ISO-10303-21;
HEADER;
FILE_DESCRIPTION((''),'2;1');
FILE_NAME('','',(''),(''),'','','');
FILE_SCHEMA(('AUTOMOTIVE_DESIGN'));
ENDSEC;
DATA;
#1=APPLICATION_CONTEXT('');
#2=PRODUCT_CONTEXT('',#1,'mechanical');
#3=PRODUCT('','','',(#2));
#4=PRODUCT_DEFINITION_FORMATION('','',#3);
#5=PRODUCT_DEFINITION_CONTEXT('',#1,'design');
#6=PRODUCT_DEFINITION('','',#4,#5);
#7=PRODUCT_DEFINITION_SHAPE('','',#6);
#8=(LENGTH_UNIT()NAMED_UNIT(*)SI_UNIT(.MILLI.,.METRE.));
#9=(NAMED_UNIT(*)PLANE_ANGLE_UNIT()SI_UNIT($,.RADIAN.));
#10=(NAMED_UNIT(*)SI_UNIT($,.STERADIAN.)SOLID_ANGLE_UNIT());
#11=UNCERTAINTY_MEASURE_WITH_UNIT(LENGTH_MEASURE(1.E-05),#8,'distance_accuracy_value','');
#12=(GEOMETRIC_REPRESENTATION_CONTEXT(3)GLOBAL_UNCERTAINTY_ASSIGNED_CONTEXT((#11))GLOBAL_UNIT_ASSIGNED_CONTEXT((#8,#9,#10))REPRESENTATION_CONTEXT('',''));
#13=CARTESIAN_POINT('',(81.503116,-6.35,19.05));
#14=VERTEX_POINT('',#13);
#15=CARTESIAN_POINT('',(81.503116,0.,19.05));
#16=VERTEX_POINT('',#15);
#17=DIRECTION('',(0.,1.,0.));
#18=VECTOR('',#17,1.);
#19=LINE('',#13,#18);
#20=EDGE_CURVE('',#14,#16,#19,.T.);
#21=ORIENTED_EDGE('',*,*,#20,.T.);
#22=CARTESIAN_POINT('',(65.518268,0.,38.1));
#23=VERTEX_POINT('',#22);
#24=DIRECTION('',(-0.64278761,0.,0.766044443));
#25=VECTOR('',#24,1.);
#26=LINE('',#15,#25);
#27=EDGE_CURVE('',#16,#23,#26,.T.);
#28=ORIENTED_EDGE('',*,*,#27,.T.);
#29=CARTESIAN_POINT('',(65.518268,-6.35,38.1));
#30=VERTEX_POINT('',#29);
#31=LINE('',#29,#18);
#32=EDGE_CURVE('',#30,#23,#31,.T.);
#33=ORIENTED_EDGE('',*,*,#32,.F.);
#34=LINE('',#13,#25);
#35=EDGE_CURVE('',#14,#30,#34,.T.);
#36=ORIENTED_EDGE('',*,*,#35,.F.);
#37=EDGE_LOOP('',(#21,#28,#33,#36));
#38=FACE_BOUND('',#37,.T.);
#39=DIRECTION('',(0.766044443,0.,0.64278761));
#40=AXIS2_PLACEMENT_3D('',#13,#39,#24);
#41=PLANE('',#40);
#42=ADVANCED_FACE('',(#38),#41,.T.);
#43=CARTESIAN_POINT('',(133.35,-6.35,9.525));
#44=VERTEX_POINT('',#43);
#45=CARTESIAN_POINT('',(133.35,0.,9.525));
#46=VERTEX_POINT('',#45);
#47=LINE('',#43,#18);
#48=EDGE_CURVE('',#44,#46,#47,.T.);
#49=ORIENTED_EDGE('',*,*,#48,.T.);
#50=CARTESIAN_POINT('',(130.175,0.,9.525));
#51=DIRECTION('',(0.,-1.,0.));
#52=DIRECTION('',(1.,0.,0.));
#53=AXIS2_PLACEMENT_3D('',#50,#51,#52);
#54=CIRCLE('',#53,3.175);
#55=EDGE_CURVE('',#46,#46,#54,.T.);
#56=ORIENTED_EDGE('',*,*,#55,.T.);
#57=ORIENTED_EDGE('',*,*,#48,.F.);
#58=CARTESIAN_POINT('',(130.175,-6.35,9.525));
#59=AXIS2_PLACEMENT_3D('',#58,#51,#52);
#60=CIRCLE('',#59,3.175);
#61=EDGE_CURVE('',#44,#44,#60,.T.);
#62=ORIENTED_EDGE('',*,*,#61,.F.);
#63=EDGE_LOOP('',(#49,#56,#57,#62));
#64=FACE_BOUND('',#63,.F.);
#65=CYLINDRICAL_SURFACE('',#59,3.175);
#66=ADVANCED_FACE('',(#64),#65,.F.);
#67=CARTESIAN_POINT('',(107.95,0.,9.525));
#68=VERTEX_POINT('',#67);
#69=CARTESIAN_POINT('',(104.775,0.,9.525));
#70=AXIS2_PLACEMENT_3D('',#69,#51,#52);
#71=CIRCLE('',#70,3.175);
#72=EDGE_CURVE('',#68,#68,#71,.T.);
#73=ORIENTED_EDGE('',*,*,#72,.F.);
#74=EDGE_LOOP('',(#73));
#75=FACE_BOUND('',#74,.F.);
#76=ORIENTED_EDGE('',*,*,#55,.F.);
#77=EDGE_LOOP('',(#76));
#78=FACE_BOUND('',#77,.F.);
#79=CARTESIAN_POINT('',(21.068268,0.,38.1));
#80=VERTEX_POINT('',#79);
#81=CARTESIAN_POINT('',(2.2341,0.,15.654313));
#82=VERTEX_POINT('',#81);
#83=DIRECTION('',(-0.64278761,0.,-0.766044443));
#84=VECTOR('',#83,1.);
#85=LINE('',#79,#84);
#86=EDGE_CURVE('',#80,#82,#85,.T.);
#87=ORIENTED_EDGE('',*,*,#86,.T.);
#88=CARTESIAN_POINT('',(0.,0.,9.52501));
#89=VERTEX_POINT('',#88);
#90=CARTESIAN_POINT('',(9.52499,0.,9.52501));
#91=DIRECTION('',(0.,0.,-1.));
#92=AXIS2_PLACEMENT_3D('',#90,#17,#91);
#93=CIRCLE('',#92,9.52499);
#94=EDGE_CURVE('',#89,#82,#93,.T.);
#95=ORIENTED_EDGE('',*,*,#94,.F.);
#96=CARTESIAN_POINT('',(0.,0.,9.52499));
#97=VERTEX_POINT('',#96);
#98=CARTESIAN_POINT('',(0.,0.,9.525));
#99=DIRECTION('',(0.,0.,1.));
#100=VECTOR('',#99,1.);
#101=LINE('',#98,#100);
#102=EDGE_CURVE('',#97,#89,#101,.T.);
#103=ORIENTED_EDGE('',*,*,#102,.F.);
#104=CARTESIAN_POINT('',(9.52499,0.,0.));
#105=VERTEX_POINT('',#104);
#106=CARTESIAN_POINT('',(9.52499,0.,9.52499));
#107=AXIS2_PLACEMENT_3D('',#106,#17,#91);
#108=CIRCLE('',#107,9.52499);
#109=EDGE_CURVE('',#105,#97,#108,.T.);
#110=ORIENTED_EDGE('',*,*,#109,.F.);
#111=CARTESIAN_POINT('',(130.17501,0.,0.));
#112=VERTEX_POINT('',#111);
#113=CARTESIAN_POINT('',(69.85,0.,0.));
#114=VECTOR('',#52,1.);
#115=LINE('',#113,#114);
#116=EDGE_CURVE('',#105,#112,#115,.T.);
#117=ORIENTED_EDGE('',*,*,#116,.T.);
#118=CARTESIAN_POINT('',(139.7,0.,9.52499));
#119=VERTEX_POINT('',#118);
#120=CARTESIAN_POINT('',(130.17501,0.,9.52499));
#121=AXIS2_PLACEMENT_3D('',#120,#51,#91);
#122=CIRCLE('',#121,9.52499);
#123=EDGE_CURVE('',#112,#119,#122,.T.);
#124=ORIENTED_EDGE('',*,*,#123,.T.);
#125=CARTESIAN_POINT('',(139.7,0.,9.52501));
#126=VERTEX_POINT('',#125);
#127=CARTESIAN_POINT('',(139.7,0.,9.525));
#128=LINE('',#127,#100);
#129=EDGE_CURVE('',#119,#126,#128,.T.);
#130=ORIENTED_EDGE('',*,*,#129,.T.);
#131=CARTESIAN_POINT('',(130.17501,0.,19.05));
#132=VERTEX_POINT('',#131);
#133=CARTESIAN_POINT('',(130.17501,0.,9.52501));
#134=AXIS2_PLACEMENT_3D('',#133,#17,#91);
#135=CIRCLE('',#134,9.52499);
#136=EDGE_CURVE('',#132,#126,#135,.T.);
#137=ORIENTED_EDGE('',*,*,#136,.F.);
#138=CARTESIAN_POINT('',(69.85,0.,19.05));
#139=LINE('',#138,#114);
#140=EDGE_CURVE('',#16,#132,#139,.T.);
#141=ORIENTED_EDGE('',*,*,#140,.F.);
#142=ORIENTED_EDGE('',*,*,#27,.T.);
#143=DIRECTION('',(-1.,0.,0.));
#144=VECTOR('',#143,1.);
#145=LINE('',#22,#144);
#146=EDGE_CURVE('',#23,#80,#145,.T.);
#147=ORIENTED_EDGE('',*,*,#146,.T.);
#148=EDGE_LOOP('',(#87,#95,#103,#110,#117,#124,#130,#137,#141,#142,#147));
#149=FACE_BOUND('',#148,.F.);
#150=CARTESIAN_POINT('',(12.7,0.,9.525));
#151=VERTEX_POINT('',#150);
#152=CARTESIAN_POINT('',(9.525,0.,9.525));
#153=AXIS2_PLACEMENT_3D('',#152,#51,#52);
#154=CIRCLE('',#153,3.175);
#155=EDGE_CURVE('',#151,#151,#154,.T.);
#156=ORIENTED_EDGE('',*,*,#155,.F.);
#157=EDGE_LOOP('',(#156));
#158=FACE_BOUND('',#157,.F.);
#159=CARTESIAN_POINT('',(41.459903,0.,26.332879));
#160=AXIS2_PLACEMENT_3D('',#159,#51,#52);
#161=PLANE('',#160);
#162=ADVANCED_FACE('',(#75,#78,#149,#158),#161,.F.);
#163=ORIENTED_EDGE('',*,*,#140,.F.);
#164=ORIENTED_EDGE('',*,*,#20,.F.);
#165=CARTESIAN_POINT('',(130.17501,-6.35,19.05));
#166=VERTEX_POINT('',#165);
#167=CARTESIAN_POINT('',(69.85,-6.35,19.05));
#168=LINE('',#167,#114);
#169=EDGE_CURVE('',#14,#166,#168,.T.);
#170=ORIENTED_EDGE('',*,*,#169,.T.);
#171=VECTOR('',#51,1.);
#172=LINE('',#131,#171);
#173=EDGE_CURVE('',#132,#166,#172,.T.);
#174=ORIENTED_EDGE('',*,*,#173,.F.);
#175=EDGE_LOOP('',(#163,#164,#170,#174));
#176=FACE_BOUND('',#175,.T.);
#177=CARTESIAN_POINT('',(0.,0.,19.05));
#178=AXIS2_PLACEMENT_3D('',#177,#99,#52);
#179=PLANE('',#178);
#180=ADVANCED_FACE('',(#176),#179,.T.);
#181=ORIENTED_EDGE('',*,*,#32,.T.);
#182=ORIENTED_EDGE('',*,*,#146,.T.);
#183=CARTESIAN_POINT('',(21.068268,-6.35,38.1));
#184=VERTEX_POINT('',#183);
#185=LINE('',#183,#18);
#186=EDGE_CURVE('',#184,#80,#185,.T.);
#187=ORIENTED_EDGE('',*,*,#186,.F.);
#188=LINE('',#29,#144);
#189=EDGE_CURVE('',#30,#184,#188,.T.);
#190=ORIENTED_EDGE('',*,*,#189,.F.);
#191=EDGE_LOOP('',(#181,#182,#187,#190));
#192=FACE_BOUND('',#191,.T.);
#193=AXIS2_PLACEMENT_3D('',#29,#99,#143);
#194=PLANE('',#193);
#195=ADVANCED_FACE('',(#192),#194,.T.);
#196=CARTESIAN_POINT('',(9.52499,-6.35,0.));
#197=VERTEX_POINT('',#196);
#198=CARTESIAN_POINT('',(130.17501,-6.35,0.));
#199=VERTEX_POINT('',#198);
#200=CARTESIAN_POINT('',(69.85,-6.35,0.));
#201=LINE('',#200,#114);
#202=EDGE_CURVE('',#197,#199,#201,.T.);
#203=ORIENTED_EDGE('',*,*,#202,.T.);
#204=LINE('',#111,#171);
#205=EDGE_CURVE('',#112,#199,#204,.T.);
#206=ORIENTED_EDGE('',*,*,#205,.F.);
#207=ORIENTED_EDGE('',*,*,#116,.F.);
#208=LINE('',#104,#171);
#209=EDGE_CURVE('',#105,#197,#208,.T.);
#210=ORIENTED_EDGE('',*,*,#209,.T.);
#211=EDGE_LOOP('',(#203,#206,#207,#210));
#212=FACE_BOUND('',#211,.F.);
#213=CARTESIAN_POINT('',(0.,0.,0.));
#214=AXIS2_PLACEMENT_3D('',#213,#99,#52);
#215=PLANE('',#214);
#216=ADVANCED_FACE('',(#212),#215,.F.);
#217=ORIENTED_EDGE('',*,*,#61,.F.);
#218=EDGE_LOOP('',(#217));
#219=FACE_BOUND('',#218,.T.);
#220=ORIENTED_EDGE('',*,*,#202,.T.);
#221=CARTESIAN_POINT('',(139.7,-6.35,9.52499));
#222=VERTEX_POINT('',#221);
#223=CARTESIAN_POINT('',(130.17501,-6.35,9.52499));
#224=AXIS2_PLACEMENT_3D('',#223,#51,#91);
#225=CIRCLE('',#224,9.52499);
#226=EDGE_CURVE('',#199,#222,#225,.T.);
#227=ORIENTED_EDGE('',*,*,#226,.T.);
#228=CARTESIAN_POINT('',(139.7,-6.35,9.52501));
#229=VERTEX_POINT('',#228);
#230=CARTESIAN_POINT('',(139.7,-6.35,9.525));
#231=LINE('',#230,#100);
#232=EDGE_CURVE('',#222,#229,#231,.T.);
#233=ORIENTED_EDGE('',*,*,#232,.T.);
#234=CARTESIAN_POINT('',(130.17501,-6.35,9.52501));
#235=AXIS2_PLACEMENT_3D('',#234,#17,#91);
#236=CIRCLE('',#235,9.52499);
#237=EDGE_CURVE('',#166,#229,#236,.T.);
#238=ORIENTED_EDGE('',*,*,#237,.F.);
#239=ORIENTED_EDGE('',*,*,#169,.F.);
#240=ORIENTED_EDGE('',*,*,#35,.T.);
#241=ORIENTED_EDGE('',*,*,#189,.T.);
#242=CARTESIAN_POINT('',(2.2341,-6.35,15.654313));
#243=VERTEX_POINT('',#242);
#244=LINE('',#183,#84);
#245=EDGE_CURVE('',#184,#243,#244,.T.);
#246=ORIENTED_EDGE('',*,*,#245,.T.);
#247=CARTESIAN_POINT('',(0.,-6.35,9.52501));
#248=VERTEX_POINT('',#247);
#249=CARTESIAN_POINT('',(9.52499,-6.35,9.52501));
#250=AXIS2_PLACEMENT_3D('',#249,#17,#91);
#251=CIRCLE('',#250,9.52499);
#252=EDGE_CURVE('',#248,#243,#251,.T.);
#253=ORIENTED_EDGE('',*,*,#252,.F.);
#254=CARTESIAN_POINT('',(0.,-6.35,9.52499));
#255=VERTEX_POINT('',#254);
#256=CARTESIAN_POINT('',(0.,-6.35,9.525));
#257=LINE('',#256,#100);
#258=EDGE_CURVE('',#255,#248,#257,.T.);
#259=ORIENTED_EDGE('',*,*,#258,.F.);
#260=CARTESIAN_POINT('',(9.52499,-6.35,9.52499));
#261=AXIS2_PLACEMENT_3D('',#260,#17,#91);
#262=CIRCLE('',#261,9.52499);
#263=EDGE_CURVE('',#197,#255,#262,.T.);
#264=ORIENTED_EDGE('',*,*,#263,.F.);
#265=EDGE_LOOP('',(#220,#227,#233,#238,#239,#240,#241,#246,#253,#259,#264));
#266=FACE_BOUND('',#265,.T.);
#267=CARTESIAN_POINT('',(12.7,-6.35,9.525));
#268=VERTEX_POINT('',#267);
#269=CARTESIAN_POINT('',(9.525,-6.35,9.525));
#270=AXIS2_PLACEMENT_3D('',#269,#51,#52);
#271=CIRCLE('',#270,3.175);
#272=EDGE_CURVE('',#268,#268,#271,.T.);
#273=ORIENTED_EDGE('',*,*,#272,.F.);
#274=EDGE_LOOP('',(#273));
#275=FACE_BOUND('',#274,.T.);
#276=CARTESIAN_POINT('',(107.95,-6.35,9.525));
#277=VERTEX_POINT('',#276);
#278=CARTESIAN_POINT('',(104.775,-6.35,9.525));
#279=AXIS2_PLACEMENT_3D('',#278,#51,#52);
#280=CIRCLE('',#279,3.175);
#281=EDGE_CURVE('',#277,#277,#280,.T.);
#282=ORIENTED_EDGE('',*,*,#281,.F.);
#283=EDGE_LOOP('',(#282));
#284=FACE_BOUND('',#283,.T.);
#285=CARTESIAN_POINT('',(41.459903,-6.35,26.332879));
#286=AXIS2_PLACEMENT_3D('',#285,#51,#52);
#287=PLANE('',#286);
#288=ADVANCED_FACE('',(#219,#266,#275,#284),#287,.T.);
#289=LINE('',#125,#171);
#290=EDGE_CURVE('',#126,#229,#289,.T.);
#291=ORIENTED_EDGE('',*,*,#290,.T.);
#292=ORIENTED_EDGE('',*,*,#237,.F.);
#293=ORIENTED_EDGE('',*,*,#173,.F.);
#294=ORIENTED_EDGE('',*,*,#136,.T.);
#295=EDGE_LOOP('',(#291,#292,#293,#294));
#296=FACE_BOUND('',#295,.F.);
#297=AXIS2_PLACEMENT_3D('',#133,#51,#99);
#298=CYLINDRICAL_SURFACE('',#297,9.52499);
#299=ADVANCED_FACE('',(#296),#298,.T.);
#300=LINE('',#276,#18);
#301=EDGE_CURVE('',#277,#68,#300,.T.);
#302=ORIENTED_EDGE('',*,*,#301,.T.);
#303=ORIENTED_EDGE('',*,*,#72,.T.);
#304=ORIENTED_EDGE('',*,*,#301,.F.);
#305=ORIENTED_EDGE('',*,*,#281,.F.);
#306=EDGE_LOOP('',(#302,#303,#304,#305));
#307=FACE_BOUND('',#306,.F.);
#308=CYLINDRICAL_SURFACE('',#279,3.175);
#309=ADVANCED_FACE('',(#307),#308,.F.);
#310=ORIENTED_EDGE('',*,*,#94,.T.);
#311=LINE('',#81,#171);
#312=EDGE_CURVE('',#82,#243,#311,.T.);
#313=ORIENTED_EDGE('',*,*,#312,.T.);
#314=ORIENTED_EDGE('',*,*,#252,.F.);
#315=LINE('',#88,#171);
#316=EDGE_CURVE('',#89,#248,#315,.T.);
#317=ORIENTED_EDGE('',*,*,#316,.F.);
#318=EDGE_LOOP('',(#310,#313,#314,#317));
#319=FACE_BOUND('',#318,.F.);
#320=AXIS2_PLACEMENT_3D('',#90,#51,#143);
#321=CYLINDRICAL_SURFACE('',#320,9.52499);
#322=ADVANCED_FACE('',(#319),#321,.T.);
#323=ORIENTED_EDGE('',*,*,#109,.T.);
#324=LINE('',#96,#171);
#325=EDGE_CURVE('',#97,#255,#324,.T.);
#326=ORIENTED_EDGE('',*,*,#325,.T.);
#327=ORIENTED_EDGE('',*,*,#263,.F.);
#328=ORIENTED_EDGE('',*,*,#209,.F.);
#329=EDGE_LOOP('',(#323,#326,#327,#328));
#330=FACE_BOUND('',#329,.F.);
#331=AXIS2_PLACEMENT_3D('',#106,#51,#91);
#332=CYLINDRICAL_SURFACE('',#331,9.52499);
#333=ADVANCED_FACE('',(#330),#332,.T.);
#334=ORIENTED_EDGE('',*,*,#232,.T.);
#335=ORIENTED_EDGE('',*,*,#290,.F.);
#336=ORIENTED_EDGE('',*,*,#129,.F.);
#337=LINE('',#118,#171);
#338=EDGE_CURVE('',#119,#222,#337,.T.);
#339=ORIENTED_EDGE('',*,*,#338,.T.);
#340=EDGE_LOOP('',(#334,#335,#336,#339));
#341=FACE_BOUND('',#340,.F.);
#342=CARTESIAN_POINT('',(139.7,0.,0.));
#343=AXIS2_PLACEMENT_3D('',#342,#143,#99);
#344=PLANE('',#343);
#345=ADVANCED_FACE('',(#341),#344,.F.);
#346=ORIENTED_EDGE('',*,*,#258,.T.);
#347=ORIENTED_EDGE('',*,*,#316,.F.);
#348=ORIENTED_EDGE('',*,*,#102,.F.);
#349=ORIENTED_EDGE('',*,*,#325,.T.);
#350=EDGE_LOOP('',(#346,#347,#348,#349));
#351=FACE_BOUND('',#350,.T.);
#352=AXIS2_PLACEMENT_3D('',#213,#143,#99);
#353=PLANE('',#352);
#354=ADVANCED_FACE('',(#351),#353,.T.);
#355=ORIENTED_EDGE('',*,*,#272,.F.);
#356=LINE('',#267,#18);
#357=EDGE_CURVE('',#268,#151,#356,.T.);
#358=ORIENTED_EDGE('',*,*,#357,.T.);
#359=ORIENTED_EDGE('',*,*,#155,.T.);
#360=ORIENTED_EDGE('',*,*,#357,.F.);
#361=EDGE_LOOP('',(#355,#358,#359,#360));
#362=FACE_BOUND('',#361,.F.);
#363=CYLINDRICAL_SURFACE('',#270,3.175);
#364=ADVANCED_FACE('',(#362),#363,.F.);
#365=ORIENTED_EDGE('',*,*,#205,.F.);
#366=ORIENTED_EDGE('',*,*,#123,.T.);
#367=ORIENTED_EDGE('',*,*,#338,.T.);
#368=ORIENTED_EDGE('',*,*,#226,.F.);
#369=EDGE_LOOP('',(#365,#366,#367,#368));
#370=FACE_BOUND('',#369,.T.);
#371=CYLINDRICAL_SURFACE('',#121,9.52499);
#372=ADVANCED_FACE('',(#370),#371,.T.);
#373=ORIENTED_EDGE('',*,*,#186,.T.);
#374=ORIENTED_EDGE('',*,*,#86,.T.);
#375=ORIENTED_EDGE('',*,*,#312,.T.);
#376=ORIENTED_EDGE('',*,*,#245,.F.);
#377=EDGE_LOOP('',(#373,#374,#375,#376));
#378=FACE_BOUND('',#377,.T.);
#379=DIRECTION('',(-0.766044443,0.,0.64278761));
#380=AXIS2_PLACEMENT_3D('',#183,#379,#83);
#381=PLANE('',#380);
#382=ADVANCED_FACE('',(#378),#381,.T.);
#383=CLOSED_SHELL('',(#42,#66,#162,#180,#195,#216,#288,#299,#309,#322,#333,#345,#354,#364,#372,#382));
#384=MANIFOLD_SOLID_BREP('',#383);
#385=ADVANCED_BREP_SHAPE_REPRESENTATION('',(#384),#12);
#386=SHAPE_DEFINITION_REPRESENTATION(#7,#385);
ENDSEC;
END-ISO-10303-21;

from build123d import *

# Parameters (mm, degrees)
F0_W      = 139.7
F0_H      = 19.05
F1_DEPTH  = 6.35
F2_R      = 3.175
F3_DEPTH  = 6.351
F4_R      = 3.175
F5_DEPTH  = 25.4
F6_R      = 9.52499
F7_R      = 9.52499
F8_R      = 3.175
F9_DEPTH  = 6.351
F11_DEPTH = 6.35


# Not quite as in the source:
# - a fillet or chamfer is up to 0.001 mm smaller than in the source, because OpenCascade refuses the exact size


with BuildPart() as f1:
    # F0 (on Front) → F1 (new body)
    with BuildSketch(Plane.XZ):
        with Locations((69.85, 9.525)):
            Rectangle(F0_W, F0_H)
    extrude(amount=F1_DEPTH)

    # F2 (on face) → F3 (cut, through all)
    with BuildSketch(Plane.XZ.offset(6.35)):
        with Locations((130.175, 9.525)):
            Circle(F2_R)
    extrude(amount=-F3_DEPTH, mode=Mode.SUBTRACT)

    # F4 (on face) → F5 (cut)
    with BuildSketch(Plane.XZ.offset(6.35)):
        with Locations((104.775, 9.525)):
            Circle(F4_R)
    extrude(amount=-F5_DEPTH, mode=Mode.SUBTRACT)

    # F6 (radius 9.525 in the source; OpenCascade refuses exactly that, so slightly less here)
    f6_edges = [f1.edges().sort_by_distance(p)[0] for p in [
        (139.7, -3.175, 19.05),
        (139.7, -3.175, 0),
    ]]
    fillet(f6_edges, radius=F6_R)

    # F7 (radius 9.525 in the source; OpenCascade refuses exactly that, so slightly less here)
    f7_edges = [f1.edges().sort_by_distance(p)[0] for p in [
        (0, -3.175, 19.05),
        (0, -3.175, 0),
    ]]
    fillet(f7_edges, radius=F7_R)

    # F8 (on face) → F9 (cut, through all)
    with BuildSketch(Plane.XZ.offset(6.35)):
        with Locations((9.525, 9.525)):
            Circle(F8_R)
    extrude(amount=-F9_DEPTH, mode=Mode.SUBTRACT)

    # F10 (on face) → F11 (join)
    with BuildSketch(Plane.XZ.offset(6.35)):
        with BuildLine():
            Line((21.06826753, 38.1), (2.2284266793, 15.6475519823))
            ThreePointArc((2.2284266793, 15.6475519823), (5.4995610569, 18.1575816715), (9.525, 19.05))
            Line((9.525, 19.05), (81.5031155039, 19.05))
            Line((81.5031155039, 19.05), (65.51826753, 38.1))
            Line((65.51826753, 38.1), (21.06826753, 38.1))
        make_face()
    extrude(amount=-F11_DEPTH)


solid = f1.part
